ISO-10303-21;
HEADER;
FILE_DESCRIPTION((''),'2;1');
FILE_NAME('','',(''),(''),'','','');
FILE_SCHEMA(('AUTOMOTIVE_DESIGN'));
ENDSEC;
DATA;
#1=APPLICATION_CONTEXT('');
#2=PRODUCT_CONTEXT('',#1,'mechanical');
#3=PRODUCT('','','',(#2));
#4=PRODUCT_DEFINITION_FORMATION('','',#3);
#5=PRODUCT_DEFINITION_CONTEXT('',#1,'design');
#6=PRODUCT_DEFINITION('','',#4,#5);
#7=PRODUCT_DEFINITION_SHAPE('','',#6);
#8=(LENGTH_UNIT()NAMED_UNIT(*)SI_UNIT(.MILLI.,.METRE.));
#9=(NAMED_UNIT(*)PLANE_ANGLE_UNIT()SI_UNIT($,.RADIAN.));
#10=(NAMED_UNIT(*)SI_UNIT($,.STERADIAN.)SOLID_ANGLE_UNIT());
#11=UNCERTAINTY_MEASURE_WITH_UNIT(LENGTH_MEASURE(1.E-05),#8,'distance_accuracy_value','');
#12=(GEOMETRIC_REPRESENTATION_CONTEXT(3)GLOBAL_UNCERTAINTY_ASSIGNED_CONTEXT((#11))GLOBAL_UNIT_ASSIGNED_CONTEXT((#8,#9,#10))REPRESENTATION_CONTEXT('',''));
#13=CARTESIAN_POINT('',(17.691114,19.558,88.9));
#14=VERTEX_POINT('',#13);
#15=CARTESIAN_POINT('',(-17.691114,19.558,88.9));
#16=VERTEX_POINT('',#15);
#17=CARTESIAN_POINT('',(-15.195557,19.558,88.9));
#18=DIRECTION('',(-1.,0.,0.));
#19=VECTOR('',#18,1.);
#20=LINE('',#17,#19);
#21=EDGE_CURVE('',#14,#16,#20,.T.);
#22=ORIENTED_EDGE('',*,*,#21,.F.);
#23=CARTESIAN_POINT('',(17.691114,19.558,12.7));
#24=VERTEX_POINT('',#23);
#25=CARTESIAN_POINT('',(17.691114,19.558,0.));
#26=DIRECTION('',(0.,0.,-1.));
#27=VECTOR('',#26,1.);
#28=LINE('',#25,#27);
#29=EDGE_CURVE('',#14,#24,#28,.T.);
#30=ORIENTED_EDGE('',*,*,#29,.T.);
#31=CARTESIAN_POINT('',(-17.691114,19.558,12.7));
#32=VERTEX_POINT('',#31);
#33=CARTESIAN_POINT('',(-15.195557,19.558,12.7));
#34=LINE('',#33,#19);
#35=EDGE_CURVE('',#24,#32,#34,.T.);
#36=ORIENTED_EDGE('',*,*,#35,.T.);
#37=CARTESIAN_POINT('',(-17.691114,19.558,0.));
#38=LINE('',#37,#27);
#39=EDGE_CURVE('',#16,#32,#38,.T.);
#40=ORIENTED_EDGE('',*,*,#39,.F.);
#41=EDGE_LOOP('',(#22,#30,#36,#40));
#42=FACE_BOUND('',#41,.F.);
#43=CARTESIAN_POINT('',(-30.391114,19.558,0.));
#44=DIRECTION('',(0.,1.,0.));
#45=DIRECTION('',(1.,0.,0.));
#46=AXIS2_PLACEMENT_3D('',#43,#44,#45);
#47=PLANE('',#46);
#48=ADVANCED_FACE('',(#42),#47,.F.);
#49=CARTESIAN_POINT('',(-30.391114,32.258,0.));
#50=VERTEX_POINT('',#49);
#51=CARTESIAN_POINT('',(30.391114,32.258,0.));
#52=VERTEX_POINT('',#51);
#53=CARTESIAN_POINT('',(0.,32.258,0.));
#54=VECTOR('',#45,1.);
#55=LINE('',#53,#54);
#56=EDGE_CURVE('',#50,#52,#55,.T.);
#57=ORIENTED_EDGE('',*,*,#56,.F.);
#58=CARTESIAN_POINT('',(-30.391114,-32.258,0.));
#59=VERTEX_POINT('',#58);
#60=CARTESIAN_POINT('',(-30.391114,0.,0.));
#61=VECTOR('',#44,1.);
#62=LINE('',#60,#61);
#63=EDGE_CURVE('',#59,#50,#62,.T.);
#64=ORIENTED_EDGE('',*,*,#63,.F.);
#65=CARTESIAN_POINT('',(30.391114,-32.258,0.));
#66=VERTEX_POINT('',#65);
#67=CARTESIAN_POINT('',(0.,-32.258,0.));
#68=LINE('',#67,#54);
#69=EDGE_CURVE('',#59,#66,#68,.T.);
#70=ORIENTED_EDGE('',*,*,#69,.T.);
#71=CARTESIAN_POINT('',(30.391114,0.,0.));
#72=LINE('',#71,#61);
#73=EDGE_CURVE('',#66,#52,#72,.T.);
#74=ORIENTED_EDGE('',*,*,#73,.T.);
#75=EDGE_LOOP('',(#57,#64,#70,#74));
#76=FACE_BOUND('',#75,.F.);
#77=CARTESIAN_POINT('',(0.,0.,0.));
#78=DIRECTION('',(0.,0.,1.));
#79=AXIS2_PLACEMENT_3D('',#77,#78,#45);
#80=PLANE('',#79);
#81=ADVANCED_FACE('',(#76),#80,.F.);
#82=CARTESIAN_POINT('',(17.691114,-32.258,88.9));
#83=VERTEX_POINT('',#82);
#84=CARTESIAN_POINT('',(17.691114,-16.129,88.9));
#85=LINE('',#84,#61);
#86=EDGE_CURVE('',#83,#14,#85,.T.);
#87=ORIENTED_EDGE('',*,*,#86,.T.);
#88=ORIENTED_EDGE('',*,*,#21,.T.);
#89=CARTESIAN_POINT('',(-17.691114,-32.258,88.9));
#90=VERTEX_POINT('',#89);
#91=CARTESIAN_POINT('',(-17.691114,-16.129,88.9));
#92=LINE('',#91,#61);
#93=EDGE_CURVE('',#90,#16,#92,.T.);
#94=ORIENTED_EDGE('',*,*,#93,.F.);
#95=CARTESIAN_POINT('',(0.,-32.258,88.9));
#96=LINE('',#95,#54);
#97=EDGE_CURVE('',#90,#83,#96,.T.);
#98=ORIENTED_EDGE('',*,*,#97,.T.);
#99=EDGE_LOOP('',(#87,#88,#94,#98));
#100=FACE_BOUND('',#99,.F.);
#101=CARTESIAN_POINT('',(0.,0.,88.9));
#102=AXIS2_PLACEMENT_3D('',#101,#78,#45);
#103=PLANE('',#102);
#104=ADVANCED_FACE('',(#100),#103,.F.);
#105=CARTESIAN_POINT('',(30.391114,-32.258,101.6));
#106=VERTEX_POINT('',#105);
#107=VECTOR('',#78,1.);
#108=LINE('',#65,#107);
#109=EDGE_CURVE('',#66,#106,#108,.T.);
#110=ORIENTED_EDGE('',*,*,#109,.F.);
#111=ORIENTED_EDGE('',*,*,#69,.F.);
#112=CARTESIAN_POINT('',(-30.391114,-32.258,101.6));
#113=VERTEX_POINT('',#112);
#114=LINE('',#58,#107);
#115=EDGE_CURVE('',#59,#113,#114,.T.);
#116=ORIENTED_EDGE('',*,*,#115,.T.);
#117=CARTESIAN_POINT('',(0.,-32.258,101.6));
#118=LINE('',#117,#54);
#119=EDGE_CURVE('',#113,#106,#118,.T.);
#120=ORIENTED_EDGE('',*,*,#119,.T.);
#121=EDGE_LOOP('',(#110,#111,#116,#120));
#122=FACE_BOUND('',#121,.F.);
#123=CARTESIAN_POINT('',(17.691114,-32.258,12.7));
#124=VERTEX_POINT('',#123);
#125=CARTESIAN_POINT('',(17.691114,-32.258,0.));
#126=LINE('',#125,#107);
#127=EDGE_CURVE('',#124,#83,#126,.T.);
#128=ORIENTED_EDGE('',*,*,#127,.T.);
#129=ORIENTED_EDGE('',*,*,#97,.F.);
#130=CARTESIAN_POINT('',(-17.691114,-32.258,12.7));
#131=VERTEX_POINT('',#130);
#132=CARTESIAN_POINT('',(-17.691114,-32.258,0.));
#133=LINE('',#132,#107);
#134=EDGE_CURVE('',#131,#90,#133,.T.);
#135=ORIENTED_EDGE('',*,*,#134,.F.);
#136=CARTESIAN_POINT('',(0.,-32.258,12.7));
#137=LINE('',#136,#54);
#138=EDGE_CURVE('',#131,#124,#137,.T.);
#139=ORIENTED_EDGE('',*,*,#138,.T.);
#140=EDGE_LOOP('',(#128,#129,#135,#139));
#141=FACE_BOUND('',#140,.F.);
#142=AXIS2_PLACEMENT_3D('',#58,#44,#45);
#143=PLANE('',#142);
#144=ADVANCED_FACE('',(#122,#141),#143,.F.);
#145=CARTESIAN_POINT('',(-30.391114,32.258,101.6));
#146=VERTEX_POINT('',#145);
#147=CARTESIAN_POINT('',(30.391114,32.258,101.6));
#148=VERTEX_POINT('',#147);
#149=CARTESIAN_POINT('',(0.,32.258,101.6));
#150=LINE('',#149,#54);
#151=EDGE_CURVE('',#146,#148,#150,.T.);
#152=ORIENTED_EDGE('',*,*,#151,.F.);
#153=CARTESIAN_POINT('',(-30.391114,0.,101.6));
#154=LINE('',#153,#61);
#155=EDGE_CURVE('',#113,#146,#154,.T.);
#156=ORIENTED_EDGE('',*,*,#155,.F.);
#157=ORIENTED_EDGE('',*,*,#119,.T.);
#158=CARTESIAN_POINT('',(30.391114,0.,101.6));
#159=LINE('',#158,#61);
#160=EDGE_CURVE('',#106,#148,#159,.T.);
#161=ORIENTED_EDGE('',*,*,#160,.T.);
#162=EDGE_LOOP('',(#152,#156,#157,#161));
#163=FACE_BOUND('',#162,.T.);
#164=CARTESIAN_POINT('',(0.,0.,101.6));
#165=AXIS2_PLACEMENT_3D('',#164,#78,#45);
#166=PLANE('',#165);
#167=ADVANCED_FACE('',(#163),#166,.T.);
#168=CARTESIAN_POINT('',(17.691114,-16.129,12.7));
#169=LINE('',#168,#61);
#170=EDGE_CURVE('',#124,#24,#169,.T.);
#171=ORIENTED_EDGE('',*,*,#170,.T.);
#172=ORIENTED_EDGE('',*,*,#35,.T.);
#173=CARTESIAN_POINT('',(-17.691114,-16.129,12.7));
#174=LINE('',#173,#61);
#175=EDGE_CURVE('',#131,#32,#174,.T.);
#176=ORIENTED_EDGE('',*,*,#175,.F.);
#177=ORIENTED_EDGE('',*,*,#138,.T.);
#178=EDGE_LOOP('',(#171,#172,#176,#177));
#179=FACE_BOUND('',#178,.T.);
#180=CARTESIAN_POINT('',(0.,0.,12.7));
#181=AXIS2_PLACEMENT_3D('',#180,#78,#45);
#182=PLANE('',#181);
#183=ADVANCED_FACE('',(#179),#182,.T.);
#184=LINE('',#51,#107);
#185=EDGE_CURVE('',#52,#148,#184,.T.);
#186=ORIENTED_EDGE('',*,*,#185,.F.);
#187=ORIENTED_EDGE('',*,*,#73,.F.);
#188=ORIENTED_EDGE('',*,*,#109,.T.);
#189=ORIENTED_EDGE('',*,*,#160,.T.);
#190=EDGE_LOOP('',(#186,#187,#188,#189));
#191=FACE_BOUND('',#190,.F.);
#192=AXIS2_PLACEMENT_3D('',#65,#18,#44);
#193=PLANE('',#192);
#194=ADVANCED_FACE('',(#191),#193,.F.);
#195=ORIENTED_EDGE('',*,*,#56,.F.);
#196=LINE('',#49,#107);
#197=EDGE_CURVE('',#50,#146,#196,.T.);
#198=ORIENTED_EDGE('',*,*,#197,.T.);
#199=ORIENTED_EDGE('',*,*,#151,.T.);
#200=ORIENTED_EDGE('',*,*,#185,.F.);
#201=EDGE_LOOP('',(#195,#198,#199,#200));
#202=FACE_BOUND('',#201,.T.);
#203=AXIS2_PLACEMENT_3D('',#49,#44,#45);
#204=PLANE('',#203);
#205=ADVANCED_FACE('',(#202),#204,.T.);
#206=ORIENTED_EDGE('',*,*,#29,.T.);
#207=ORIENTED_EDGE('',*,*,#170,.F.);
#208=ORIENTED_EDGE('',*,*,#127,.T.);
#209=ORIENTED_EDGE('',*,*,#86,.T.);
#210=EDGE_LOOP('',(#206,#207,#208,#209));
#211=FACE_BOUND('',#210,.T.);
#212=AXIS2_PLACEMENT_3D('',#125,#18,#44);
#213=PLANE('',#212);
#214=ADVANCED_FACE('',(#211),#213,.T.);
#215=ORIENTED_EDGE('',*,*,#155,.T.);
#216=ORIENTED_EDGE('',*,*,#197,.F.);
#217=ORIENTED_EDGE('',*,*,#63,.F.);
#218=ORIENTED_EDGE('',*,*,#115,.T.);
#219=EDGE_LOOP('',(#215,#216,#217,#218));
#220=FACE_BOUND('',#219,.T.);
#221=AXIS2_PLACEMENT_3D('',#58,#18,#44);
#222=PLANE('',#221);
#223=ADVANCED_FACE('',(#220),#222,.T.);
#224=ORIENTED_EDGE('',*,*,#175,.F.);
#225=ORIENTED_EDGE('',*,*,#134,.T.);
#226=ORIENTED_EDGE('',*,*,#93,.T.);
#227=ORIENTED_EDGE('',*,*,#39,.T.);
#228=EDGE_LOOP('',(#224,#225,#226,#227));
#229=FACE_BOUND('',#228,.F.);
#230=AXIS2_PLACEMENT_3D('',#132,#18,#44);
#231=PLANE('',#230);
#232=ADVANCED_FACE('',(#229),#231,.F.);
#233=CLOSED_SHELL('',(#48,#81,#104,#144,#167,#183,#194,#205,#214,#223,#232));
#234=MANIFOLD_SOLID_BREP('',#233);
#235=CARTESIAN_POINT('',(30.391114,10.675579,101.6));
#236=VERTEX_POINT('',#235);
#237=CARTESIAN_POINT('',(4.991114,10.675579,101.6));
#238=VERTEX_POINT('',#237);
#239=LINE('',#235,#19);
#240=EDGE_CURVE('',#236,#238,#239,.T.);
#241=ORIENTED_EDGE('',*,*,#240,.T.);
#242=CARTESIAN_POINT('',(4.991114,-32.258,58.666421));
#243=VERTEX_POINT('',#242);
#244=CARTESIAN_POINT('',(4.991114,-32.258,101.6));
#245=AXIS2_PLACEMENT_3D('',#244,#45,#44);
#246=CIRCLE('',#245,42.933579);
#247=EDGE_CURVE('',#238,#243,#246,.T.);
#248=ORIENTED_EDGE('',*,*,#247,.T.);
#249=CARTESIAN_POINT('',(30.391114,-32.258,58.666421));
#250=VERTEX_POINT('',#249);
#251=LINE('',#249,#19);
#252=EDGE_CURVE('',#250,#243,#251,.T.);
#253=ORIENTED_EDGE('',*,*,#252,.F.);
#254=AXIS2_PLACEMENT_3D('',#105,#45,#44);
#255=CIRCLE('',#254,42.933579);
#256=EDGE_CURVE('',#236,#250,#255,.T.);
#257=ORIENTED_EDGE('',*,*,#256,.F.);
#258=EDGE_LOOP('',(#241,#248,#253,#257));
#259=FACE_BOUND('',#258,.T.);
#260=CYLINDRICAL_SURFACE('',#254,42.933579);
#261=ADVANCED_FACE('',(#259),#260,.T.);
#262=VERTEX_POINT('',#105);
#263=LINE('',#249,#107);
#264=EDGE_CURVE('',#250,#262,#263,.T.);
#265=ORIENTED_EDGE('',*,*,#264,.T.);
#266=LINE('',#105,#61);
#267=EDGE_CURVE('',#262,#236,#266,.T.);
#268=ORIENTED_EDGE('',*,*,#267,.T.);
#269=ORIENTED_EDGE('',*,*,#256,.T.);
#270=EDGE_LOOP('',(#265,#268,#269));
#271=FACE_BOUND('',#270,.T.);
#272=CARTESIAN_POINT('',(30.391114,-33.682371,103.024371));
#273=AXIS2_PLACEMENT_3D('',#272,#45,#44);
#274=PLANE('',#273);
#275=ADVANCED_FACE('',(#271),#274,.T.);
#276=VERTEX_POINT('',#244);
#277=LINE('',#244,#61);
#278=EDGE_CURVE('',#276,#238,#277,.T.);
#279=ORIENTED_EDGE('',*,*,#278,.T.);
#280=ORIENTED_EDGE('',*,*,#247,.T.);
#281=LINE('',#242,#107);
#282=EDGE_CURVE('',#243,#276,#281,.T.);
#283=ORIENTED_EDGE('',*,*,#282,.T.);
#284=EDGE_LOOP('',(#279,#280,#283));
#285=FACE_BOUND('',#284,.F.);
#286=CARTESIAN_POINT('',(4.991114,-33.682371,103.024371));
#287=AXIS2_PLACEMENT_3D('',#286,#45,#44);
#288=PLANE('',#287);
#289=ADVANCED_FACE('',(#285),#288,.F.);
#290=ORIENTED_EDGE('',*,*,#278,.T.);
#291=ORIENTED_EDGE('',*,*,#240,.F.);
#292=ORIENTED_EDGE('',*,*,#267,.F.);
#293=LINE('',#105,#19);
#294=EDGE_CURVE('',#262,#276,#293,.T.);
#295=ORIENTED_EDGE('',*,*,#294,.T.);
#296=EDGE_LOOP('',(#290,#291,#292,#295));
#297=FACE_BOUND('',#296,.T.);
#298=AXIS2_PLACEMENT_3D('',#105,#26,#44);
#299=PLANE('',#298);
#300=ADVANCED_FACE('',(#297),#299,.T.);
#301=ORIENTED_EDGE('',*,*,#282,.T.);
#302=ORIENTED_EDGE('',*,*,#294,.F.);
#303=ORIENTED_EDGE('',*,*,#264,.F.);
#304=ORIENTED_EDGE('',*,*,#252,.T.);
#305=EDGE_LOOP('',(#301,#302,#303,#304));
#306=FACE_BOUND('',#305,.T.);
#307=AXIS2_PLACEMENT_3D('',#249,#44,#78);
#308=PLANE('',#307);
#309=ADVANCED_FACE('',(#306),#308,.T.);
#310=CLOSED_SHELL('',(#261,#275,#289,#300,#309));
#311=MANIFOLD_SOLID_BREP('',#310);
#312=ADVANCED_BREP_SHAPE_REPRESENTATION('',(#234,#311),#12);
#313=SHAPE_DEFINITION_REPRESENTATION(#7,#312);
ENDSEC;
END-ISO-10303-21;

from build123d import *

# Parameters (mm, degrees)
F0_W     = 60.7822282831
F0_H     = 64.516
F1_DEPTH = 101.6
F2_T     = -12.7
F4_DEPTH = 25.4


with BuildPart() as f1:
    # F0 (on Top) → F1 (new body)
    with BuildSketch(Plane.XY):
        Rectangle(F0_W, F0_H)
    extrude(amount=F1_DEPTH)

    # F2
    f2_openings = [f1.faces().sort_by_distance(p)[0] for p in [
        (0, -32.258, 50.8),
    ]]
    offset(amount=F2_T, openings=f2_openings)


with BuildPart() as f4:
    # F3 (on face) → F4 (new body)
    with BuildSketch(Plane.YZ.offset(30.3911141416)):
        with BuildLine():
            Line((-32.258, 101.6), (10.6755790953, 101.6))
            ThreePointArc((10.6755790953, 101.6), (-62.6166249189, 131.9586249189), (-32.258, 58.6664209047))
            Line((-32.258, 58.6664209047), (-32.258, 101.6))
        make_face()
    extrude(amount=-F4_DEPTH)


solid = Compound([f1.part, f4.part])
